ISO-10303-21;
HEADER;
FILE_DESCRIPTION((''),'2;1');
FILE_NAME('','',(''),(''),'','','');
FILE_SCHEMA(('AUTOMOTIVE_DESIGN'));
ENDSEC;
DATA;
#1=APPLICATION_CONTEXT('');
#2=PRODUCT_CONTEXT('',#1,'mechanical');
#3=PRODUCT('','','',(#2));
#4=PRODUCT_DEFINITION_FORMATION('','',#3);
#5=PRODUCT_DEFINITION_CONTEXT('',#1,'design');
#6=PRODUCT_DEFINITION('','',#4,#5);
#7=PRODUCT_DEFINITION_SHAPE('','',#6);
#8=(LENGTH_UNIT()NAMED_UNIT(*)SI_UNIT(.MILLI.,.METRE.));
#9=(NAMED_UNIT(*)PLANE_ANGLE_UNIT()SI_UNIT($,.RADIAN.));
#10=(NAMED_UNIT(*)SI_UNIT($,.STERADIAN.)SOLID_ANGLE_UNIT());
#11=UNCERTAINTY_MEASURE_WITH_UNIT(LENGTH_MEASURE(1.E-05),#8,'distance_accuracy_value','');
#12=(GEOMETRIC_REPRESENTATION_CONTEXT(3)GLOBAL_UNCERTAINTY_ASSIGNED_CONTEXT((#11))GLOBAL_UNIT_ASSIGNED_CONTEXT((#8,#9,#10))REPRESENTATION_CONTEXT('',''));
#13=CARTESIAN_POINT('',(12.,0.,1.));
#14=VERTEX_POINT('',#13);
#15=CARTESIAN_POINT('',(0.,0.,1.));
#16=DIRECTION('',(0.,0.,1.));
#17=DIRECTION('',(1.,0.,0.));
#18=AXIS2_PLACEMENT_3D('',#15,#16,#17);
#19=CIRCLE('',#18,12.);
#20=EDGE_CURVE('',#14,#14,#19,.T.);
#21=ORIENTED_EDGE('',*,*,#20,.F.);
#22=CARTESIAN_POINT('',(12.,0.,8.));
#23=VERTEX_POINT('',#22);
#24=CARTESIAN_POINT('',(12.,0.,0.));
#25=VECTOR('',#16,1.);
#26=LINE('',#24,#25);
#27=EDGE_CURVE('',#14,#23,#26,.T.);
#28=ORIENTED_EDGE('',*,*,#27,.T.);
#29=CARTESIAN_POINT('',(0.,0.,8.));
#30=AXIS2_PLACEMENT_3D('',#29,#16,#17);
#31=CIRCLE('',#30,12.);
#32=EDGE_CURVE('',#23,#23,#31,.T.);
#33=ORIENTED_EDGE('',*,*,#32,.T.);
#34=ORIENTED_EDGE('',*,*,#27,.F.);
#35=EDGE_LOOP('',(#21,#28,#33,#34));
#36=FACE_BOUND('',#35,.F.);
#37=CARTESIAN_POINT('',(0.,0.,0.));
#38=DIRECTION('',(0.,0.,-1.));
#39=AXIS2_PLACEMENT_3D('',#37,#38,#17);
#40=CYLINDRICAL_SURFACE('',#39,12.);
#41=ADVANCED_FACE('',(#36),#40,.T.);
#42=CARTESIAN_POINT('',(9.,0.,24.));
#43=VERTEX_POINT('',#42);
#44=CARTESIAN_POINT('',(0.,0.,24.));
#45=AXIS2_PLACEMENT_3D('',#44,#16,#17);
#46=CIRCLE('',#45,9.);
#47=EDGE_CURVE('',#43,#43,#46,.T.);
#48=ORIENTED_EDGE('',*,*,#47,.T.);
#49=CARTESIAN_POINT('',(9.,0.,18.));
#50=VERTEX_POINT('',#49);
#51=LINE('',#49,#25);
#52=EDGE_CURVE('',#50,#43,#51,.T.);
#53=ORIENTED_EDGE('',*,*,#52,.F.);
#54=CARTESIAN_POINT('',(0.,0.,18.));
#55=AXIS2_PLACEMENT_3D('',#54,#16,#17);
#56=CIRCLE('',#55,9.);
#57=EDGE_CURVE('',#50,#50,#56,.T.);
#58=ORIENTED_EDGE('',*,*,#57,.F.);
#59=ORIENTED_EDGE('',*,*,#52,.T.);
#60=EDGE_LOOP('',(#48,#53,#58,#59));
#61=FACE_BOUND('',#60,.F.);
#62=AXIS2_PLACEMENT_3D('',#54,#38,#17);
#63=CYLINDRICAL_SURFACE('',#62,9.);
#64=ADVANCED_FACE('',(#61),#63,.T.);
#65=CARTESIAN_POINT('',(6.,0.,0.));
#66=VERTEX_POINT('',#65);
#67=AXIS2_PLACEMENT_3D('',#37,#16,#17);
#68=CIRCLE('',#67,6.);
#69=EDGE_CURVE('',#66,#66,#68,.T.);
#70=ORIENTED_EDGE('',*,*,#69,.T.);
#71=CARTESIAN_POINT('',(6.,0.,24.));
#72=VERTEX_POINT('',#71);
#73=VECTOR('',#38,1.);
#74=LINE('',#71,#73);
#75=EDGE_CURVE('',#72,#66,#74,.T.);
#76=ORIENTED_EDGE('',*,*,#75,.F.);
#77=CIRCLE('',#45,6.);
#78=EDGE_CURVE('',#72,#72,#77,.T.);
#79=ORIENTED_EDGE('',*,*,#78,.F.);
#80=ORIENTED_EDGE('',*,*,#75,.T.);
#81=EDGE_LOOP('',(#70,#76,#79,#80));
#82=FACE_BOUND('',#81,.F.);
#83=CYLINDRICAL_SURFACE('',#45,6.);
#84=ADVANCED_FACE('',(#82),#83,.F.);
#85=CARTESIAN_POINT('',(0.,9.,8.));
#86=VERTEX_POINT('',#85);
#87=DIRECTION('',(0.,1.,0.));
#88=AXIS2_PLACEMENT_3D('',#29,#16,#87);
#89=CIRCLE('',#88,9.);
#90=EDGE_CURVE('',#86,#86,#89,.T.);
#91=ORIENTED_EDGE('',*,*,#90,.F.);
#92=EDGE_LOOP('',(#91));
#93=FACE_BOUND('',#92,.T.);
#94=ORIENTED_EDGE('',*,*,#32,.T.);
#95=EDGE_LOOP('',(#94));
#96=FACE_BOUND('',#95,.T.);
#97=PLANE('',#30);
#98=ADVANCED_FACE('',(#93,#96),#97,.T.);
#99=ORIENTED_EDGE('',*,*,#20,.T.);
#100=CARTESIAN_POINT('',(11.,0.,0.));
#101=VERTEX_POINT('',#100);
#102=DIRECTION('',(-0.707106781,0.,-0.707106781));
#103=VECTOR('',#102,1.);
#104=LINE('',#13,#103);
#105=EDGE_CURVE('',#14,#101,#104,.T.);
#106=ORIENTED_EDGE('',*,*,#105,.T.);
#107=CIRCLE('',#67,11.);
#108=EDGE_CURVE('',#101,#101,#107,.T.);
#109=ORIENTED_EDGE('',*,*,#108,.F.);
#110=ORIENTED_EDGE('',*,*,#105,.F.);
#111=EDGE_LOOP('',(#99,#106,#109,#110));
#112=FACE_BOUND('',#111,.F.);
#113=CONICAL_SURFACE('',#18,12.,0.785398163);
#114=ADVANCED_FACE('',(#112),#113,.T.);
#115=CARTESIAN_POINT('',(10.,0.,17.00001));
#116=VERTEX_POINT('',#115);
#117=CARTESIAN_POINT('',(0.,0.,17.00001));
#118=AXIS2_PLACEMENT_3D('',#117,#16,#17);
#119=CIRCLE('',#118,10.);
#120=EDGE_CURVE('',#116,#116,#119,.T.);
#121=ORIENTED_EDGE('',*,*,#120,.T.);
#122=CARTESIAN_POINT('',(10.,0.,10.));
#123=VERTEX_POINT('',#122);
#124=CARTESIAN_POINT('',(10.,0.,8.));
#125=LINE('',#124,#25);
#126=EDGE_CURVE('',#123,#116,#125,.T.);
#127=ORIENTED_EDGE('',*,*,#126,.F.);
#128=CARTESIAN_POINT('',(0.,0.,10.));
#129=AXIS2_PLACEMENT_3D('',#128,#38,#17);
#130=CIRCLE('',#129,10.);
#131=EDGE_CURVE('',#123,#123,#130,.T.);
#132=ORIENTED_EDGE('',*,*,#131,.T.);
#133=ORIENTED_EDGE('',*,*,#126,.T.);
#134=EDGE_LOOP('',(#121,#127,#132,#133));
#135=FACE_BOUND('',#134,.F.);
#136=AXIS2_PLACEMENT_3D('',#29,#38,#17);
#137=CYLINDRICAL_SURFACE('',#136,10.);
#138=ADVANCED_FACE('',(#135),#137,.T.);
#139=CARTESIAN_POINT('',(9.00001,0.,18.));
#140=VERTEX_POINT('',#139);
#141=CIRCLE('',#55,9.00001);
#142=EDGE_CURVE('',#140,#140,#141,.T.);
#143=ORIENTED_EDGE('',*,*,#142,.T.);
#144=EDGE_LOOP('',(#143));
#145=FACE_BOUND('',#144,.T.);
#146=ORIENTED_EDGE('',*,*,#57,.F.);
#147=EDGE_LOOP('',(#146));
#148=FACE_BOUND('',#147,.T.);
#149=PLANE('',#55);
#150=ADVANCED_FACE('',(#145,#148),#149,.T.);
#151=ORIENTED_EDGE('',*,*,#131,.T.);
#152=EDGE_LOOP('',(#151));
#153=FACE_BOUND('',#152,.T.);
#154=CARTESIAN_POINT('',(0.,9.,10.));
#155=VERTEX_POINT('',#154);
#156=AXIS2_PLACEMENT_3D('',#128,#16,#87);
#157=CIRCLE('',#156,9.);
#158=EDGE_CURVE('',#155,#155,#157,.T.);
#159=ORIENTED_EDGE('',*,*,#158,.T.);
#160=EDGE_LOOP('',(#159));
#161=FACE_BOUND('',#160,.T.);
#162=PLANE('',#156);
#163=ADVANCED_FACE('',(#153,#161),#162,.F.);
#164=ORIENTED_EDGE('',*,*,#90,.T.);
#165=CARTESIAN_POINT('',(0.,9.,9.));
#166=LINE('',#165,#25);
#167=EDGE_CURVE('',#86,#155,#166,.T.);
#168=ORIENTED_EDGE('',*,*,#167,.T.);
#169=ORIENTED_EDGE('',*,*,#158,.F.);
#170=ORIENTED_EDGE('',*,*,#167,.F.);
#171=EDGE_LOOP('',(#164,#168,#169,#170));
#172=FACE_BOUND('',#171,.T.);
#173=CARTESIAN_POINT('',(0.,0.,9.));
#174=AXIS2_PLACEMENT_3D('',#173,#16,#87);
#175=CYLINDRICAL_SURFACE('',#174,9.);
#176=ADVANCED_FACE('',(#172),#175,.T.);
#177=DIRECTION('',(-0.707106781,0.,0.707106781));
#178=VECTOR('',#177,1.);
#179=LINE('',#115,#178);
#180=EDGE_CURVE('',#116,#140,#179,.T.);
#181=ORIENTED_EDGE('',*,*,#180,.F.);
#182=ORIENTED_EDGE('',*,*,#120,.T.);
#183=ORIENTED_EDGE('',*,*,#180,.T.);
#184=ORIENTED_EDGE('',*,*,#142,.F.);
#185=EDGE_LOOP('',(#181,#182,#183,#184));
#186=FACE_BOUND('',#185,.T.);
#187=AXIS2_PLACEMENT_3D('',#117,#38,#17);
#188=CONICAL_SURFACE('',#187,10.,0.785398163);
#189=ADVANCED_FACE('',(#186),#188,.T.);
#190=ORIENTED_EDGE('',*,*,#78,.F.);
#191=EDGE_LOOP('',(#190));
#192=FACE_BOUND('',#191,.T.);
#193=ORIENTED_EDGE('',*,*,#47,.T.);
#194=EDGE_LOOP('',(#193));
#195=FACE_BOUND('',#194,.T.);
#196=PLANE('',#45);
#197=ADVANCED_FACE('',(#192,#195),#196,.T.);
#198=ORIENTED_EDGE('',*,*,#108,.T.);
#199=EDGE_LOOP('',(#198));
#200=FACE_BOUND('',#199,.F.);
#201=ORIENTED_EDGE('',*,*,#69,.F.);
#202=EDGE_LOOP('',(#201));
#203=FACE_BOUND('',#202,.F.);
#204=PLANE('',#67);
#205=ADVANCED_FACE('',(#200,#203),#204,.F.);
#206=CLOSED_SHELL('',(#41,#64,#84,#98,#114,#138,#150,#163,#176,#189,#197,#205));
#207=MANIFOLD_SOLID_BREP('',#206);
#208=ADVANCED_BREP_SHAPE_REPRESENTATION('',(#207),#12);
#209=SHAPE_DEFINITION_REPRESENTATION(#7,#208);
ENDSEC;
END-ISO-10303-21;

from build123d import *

# Parameters (mm, degrees)
F0_R      = 12
F1_DEPTH  = 8
F2_R      = 10
F3_DEPTH  = 10
F4_R      = 9
F5_DEPTH  = 6
F6_W      = 1
F6_H      = 2
F9_SIZE   = 1
F10_SIZE  = 0.99999
F11_R     = 6
F12_DEPTH = 42.1


# Not quite as in the source:
# - a fillet or chamfer is up to 0.001 mm smaller than in the source, because OpenCascade refuses the exact size


with BuildPart() as f1:
    # F0 (on Top) → F1 (new body)
    with BuildSketch(Plane.XY):
        Circle(F0_R)
    extrude(amount=F1_DEPTH)

    # F2 (on face) → F3 (join)
    with BuildSketch(Plane.XY.offset(8)):
        Circle(F2_R)
    extrude(amount=F3_DEPTH)

    # F4 (on face) → F5 (join)
    with BuildSketch(Plane.XY.offset(18)):
        Circle(F4_R)
    extrude(amount=F5_DEPTH)

    # F6 (on Right) → F8 (revolve, cut)
    with BuildSketch(Plane.YZ):
        with Locations((9.5, 9)):
            Rectangle(F6_W, F6_H)
    revolve(axis=Axis((0, 0, 13.7254064903), (0, 0, 1)), mode=Mode.SUBTRACT)

    # F9
    f9_edges = [f1.edges().sort_by_distance(p)[0] for p in [
        (-12, 0, 0),
    ]]
    chamfer(f9_edges, length=F9_SIZE)

    # F10 (size 1 in the source; OpenCascade refuses exactly that, so slightly less here)
    f10_edges = [f1.edges().sort_by_distance(p)[0] for p in [
        (-10, 0, 18),
    ]]
    chamfer(f10_edges, length=F10_SIZE)

    # F11 (on face) → F12 (cut)
    with BuildSketch(Plane.XY.offset(24)):
        Circle(F11_R)
    extrude(amount=-F12_DEPTH, mode=Mode.SUBTRACT)


solid = f1.part
